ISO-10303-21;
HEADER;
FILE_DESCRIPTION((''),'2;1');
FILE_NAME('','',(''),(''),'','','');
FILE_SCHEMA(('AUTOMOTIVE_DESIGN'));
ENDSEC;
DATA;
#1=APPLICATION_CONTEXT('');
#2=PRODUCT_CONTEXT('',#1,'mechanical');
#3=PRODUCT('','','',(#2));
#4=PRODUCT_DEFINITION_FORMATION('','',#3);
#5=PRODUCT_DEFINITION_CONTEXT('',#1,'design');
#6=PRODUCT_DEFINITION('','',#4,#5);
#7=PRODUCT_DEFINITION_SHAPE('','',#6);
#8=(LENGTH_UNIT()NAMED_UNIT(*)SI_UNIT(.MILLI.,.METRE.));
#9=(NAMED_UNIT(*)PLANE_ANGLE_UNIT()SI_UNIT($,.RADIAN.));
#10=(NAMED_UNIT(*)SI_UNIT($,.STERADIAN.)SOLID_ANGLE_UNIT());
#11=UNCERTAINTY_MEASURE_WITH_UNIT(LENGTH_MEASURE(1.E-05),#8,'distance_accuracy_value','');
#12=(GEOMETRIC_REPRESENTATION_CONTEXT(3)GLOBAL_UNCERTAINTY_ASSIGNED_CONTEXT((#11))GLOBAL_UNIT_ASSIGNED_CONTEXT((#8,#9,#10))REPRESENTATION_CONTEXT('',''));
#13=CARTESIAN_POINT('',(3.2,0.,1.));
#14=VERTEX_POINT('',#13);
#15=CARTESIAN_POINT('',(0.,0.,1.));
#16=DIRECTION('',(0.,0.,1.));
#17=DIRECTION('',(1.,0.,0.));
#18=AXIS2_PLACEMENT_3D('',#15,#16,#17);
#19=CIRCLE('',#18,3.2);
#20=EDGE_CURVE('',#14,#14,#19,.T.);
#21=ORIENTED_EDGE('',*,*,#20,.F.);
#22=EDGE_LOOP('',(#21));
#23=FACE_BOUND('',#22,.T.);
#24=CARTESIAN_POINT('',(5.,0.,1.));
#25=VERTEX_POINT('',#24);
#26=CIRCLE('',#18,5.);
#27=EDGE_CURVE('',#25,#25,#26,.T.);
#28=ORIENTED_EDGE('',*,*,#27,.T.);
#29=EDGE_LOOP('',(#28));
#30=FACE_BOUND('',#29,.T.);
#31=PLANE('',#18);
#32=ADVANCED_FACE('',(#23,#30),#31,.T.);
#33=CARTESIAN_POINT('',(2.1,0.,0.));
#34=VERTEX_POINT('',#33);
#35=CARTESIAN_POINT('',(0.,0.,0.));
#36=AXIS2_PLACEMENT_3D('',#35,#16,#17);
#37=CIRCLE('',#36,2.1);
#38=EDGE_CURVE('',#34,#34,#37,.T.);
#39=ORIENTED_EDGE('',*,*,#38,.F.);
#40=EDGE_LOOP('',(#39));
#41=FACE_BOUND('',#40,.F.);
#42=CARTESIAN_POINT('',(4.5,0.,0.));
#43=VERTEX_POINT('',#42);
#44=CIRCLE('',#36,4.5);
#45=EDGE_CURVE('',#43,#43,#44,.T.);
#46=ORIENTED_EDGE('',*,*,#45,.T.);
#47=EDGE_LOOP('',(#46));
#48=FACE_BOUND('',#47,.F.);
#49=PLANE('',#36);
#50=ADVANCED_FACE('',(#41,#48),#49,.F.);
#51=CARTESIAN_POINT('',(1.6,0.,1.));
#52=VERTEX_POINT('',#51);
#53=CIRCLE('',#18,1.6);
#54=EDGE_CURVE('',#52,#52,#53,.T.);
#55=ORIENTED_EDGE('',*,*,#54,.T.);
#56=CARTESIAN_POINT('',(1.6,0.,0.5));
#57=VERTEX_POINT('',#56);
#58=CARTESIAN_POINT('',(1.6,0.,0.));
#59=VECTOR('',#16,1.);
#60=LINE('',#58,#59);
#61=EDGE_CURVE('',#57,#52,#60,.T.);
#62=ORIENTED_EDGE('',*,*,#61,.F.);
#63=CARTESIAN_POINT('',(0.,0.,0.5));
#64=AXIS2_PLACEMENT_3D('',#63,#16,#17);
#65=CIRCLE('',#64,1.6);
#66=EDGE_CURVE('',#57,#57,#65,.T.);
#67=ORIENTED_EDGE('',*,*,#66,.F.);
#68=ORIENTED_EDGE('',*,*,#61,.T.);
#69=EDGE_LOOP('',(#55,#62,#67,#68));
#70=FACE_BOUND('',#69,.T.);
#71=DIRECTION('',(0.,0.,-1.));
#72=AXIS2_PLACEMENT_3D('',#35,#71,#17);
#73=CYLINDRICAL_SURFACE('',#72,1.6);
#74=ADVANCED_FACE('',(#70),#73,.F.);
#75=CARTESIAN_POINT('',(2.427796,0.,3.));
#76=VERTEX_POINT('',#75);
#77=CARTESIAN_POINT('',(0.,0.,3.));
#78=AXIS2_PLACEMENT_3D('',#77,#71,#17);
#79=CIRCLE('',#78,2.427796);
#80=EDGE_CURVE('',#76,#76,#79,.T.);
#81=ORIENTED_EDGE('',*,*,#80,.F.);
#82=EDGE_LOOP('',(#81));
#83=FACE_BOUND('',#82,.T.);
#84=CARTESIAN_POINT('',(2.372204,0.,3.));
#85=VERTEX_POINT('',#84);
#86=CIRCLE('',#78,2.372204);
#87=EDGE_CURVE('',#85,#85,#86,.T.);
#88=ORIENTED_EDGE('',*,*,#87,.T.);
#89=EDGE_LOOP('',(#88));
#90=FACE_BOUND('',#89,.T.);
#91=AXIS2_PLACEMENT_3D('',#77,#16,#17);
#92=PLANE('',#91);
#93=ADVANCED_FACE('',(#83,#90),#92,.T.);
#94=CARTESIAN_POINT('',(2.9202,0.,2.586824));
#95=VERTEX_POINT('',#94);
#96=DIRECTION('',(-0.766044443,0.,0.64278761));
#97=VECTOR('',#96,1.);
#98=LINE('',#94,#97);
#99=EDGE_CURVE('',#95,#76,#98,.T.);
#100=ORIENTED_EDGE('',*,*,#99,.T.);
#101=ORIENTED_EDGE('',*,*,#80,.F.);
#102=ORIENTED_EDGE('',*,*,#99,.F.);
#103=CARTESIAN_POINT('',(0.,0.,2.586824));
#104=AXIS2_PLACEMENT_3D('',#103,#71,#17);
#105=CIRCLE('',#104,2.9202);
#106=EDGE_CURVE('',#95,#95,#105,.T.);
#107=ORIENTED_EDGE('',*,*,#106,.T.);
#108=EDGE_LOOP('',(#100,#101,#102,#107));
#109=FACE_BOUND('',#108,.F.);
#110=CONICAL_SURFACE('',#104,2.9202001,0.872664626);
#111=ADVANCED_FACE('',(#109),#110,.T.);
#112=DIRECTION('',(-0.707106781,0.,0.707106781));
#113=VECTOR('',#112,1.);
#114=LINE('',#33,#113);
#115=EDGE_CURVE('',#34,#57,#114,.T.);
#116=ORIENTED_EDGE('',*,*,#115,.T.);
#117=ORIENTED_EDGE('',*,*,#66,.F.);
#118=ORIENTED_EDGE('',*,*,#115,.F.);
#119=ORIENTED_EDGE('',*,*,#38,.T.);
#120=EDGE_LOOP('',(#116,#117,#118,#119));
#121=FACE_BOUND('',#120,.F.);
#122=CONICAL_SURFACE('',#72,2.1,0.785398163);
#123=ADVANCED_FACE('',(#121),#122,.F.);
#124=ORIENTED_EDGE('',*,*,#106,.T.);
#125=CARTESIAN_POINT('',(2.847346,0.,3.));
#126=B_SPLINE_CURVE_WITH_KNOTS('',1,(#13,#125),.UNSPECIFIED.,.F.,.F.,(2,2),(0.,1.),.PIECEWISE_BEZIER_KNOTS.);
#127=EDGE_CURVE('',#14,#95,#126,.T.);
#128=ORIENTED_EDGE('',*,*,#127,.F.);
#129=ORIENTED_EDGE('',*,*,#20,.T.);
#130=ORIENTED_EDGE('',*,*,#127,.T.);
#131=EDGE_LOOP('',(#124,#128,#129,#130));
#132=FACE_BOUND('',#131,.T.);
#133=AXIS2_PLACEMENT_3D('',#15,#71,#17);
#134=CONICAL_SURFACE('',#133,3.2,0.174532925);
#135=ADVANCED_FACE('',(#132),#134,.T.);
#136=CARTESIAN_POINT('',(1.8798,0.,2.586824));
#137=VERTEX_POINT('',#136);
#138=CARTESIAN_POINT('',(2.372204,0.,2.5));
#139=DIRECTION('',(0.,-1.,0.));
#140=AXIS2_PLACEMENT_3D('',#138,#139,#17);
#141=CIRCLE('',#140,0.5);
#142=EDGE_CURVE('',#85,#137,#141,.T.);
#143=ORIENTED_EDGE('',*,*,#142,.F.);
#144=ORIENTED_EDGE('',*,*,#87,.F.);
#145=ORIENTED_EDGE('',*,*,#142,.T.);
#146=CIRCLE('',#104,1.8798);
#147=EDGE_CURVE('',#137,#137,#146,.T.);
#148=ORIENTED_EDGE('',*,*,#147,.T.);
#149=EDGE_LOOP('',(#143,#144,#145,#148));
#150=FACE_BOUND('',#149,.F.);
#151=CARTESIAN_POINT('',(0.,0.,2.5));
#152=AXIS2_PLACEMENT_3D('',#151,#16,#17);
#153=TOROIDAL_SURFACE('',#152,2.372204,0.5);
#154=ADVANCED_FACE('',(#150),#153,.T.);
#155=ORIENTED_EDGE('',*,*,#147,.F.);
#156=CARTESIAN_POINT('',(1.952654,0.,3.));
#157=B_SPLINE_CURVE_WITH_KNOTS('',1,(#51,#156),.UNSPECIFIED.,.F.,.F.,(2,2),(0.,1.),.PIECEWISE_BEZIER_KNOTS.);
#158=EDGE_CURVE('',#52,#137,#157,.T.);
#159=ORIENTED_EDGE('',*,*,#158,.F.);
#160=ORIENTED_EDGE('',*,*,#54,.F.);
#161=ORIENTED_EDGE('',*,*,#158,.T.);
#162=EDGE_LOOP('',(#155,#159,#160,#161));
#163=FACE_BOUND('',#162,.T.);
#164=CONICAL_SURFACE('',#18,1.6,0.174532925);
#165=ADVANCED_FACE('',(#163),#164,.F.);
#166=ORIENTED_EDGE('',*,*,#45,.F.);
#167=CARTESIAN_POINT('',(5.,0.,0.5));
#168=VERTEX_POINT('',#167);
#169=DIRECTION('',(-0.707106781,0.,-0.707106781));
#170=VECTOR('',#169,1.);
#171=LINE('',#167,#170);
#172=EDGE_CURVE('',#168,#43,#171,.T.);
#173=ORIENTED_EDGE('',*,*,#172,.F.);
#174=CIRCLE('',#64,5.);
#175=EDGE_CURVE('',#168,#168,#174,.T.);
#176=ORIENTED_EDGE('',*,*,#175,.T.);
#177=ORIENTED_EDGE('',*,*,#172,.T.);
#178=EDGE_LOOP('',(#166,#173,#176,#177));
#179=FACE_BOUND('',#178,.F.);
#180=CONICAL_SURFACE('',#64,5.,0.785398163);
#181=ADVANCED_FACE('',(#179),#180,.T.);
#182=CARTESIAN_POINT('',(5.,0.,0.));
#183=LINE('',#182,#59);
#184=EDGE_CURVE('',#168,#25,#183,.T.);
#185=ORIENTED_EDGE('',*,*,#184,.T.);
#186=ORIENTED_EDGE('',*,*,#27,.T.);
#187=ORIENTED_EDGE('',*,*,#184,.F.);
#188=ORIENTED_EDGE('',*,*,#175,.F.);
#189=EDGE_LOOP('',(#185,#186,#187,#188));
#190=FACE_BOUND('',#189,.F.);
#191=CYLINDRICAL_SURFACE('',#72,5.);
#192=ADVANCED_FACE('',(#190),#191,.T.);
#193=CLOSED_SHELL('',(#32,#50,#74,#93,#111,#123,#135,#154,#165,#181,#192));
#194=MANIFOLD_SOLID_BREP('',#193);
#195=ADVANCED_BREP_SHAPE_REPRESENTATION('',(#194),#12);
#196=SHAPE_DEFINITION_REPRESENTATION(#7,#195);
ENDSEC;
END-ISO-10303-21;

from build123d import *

# Parameters (mm, degrees)
F0_R     = 5
F0_R_2   = 1.6
F1_DEPTH = 1
F2_R     = 3.2
F2_R_2   = 1.6
F3_DEPTH = 2
F3_TAPER = 10
F5_R     = 0.5


# Not quite as in the source:
# - a fillet or chamfer that OpenCascade refuses, or shapes differently, is made with other operations: its cross-section is extruded or revolved along the edge and cut away or added


with BuildPart() as f1:
    # F0 (on Top) → F1 (new body)
    with BuildSketch(Plane.XY):
        Circle(F0_R)
        Circle(F0_R_2, mode=Mode.SUBTRACT)
    extrude(amount=F1_DEPTH)

    # F2 (on face) → F3 (join)
    with BuildSketch(Plane.XY.offset(1)):
        Circle(F2_R)
        Circle(F2_R_2, mode=Mode.SUBTRACT)
    extrude(amount=F3_DEPTH, taper=F3_TAPER)

    # F4: chamfer of 0.5 on 3 edges, made by hand

    # F4_s1 → F4_t2 (revolve, cut)
    with BuildSketch(Plane.XZ):
        Polygon((5, 0.5), (4.5, 0), (5, 0), align=None)
    revolve(axis=Axis((0, 0, 0), (0, 0, 1)), mode=Mode.SUBTRACT)

    # F4_s3 → F4_t4 (revolve, cut)
    with BuildSketch(Plane.XZ):
        Polygon((2.9202000995, 2.5868240888), (2.427796223, 3), (2.8473460386, 3), align=None)
    revolve(axis=Axis((0, 0, 3), (0, 0, -1)), mode=Mode.SUBTRACT)

    # F4_s5 → F4_t6 (revolve, cut)
    with BuildSketch(Plane.XZ):
        Polygon((2.1, 0), (1.6, 0.5), (1.6, 0), align=None)
    revolve(axis=Axis((0, 0, 0), (0, 0, 1)), mode=Mode.SUBTRACT)

    # F5
    f5_edges = [f1.edges().sort_by_distance(p)[0] for p in [
        (-1.952654, 0, 3),
    ]]
    fillet(f5_edges, radius=F5_R)


solid = f1.part
